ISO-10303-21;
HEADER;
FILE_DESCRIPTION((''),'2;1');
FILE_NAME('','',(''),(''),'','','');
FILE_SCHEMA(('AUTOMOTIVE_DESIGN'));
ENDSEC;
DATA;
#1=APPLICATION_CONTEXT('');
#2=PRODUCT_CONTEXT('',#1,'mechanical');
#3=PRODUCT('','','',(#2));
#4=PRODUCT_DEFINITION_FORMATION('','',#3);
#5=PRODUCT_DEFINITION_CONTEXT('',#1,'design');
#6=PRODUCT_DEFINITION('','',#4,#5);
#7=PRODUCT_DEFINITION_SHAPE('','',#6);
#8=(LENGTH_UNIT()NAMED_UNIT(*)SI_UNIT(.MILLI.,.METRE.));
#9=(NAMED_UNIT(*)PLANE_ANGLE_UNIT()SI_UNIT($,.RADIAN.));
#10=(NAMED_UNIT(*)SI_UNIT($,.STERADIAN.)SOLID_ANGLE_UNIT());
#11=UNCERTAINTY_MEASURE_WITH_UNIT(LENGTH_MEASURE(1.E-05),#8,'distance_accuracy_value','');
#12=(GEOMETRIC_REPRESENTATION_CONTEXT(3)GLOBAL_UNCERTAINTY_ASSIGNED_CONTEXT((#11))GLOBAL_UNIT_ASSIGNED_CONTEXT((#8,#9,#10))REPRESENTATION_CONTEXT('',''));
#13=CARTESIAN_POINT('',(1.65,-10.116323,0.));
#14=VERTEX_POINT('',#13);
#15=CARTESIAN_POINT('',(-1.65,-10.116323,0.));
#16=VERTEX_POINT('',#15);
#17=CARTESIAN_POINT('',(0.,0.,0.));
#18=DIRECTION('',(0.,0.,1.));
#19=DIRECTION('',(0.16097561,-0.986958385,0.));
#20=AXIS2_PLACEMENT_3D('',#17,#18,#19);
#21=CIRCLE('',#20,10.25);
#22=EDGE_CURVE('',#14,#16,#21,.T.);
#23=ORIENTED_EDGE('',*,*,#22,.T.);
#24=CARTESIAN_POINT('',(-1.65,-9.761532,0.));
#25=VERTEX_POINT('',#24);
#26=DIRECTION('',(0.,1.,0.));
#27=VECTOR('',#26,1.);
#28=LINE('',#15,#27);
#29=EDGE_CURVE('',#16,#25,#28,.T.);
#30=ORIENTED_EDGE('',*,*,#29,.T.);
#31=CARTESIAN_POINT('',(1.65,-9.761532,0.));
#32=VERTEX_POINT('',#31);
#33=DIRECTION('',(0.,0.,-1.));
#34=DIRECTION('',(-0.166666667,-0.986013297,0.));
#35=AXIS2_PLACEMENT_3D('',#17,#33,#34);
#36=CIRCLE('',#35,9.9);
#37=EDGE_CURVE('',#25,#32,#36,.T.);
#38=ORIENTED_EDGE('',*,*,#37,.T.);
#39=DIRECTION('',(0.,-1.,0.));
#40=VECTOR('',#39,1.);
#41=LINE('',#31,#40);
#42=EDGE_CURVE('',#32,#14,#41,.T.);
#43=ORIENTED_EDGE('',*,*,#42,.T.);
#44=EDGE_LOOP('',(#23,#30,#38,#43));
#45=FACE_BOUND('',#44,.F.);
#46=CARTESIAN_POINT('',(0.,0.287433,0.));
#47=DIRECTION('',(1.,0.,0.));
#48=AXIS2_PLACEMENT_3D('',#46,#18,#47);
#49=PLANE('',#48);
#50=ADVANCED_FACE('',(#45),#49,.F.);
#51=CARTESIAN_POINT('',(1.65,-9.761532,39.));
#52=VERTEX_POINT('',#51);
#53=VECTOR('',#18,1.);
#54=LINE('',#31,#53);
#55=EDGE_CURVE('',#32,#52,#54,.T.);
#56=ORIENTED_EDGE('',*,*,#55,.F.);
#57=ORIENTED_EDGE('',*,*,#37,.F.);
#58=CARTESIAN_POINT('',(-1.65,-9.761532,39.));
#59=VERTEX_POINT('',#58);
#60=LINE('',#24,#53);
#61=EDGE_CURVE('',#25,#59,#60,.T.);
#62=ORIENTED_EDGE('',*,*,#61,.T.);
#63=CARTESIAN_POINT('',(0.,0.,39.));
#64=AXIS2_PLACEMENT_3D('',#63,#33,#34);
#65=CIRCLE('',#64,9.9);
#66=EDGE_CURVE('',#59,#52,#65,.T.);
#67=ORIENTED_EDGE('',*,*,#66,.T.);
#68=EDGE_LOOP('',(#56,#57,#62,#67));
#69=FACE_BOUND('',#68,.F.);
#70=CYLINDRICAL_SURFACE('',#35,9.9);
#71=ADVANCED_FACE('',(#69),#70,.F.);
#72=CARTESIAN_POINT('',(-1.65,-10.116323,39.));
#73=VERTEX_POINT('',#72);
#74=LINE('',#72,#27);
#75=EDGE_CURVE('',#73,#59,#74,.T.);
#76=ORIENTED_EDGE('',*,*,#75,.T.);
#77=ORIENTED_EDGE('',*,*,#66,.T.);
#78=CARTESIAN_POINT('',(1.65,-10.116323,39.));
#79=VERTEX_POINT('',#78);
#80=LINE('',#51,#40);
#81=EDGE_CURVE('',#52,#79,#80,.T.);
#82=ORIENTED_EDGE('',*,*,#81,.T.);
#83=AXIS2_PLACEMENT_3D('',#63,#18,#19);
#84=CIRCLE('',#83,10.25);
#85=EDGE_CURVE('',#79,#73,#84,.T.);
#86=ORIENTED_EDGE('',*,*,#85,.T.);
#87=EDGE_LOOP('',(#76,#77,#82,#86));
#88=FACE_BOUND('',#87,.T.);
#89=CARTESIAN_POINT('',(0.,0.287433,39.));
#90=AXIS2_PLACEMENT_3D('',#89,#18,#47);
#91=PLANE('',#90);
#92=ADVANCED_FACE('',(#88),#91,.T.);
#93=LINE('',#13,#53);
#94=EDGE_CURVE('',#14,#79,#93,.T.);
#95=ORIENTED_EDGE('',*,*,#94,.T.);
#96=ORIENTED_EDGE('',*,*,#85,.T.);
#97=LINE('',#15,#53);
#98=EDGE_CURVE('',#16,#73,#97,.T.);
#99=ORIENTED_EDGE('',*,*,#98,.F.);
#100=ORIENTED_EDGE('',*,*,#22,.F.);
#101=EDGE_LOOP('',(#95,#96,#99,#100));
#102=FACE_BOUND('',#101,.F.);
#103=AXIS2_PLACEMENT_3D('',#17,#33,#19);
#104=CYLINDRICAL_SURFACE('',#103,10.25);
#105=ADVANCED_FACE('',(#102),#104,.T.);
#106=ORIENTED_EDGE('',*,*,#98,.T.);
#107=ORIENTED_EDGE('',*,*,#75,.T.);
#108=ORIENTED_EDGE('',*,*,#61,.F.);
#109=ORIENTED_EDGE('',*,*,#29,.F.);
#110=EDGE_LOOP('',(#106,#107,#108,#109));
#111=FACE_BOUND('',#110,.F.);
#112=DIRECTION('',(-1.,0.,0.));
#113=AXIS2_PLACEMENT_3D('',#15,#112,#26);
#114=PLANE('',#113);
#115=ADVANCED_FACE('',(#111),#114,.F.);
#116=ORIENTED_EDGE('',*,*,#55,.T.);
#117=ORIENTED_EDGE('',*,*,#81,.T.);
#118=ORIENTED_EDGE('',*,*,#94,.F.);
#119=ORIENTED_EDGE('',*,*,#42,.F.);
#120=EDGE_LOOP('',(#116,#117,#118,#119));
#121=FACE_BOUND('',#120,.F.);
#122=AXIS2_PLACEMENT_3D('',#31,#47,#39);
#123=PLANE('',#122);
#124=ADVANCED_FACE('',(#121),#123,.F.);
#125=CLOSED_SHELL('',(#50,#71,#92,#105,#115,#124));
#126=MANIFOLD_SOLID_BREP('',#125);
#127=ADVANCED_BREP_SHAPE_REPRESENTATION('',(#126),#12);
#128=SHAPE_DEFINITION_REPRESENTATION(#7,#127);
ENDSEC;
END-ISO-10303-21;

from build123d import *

# Parameters (mm, degrees)
F1_DEPTH = 39


# Not quite as in the source:
# - the program builds the solid bodies; features that only make, move or delete a surface that nothing else refers to are left out


with BuildPart() as f1:
    # F0 (on Top) → F1 (new body)
    with BuildSketch(Plane.XY):
        with BuildLine():
            Line((1.65, -9.7615316421), (1.65, -10.1163234428))
            ThreePointArc((1.65, -10.1163234428), (0, 10.25), (-1.65, -10.1163234428))
            Line((-1.65, -10.1163234428), (-1.65, -9.7615316421))
            ThreePointArc((-1.65, -9.7615316421), (0, 9.9), (1.65, -9.7615316421))
        make_face()
    extrude(amount=F1_DEPTH)


solid = f1.part
